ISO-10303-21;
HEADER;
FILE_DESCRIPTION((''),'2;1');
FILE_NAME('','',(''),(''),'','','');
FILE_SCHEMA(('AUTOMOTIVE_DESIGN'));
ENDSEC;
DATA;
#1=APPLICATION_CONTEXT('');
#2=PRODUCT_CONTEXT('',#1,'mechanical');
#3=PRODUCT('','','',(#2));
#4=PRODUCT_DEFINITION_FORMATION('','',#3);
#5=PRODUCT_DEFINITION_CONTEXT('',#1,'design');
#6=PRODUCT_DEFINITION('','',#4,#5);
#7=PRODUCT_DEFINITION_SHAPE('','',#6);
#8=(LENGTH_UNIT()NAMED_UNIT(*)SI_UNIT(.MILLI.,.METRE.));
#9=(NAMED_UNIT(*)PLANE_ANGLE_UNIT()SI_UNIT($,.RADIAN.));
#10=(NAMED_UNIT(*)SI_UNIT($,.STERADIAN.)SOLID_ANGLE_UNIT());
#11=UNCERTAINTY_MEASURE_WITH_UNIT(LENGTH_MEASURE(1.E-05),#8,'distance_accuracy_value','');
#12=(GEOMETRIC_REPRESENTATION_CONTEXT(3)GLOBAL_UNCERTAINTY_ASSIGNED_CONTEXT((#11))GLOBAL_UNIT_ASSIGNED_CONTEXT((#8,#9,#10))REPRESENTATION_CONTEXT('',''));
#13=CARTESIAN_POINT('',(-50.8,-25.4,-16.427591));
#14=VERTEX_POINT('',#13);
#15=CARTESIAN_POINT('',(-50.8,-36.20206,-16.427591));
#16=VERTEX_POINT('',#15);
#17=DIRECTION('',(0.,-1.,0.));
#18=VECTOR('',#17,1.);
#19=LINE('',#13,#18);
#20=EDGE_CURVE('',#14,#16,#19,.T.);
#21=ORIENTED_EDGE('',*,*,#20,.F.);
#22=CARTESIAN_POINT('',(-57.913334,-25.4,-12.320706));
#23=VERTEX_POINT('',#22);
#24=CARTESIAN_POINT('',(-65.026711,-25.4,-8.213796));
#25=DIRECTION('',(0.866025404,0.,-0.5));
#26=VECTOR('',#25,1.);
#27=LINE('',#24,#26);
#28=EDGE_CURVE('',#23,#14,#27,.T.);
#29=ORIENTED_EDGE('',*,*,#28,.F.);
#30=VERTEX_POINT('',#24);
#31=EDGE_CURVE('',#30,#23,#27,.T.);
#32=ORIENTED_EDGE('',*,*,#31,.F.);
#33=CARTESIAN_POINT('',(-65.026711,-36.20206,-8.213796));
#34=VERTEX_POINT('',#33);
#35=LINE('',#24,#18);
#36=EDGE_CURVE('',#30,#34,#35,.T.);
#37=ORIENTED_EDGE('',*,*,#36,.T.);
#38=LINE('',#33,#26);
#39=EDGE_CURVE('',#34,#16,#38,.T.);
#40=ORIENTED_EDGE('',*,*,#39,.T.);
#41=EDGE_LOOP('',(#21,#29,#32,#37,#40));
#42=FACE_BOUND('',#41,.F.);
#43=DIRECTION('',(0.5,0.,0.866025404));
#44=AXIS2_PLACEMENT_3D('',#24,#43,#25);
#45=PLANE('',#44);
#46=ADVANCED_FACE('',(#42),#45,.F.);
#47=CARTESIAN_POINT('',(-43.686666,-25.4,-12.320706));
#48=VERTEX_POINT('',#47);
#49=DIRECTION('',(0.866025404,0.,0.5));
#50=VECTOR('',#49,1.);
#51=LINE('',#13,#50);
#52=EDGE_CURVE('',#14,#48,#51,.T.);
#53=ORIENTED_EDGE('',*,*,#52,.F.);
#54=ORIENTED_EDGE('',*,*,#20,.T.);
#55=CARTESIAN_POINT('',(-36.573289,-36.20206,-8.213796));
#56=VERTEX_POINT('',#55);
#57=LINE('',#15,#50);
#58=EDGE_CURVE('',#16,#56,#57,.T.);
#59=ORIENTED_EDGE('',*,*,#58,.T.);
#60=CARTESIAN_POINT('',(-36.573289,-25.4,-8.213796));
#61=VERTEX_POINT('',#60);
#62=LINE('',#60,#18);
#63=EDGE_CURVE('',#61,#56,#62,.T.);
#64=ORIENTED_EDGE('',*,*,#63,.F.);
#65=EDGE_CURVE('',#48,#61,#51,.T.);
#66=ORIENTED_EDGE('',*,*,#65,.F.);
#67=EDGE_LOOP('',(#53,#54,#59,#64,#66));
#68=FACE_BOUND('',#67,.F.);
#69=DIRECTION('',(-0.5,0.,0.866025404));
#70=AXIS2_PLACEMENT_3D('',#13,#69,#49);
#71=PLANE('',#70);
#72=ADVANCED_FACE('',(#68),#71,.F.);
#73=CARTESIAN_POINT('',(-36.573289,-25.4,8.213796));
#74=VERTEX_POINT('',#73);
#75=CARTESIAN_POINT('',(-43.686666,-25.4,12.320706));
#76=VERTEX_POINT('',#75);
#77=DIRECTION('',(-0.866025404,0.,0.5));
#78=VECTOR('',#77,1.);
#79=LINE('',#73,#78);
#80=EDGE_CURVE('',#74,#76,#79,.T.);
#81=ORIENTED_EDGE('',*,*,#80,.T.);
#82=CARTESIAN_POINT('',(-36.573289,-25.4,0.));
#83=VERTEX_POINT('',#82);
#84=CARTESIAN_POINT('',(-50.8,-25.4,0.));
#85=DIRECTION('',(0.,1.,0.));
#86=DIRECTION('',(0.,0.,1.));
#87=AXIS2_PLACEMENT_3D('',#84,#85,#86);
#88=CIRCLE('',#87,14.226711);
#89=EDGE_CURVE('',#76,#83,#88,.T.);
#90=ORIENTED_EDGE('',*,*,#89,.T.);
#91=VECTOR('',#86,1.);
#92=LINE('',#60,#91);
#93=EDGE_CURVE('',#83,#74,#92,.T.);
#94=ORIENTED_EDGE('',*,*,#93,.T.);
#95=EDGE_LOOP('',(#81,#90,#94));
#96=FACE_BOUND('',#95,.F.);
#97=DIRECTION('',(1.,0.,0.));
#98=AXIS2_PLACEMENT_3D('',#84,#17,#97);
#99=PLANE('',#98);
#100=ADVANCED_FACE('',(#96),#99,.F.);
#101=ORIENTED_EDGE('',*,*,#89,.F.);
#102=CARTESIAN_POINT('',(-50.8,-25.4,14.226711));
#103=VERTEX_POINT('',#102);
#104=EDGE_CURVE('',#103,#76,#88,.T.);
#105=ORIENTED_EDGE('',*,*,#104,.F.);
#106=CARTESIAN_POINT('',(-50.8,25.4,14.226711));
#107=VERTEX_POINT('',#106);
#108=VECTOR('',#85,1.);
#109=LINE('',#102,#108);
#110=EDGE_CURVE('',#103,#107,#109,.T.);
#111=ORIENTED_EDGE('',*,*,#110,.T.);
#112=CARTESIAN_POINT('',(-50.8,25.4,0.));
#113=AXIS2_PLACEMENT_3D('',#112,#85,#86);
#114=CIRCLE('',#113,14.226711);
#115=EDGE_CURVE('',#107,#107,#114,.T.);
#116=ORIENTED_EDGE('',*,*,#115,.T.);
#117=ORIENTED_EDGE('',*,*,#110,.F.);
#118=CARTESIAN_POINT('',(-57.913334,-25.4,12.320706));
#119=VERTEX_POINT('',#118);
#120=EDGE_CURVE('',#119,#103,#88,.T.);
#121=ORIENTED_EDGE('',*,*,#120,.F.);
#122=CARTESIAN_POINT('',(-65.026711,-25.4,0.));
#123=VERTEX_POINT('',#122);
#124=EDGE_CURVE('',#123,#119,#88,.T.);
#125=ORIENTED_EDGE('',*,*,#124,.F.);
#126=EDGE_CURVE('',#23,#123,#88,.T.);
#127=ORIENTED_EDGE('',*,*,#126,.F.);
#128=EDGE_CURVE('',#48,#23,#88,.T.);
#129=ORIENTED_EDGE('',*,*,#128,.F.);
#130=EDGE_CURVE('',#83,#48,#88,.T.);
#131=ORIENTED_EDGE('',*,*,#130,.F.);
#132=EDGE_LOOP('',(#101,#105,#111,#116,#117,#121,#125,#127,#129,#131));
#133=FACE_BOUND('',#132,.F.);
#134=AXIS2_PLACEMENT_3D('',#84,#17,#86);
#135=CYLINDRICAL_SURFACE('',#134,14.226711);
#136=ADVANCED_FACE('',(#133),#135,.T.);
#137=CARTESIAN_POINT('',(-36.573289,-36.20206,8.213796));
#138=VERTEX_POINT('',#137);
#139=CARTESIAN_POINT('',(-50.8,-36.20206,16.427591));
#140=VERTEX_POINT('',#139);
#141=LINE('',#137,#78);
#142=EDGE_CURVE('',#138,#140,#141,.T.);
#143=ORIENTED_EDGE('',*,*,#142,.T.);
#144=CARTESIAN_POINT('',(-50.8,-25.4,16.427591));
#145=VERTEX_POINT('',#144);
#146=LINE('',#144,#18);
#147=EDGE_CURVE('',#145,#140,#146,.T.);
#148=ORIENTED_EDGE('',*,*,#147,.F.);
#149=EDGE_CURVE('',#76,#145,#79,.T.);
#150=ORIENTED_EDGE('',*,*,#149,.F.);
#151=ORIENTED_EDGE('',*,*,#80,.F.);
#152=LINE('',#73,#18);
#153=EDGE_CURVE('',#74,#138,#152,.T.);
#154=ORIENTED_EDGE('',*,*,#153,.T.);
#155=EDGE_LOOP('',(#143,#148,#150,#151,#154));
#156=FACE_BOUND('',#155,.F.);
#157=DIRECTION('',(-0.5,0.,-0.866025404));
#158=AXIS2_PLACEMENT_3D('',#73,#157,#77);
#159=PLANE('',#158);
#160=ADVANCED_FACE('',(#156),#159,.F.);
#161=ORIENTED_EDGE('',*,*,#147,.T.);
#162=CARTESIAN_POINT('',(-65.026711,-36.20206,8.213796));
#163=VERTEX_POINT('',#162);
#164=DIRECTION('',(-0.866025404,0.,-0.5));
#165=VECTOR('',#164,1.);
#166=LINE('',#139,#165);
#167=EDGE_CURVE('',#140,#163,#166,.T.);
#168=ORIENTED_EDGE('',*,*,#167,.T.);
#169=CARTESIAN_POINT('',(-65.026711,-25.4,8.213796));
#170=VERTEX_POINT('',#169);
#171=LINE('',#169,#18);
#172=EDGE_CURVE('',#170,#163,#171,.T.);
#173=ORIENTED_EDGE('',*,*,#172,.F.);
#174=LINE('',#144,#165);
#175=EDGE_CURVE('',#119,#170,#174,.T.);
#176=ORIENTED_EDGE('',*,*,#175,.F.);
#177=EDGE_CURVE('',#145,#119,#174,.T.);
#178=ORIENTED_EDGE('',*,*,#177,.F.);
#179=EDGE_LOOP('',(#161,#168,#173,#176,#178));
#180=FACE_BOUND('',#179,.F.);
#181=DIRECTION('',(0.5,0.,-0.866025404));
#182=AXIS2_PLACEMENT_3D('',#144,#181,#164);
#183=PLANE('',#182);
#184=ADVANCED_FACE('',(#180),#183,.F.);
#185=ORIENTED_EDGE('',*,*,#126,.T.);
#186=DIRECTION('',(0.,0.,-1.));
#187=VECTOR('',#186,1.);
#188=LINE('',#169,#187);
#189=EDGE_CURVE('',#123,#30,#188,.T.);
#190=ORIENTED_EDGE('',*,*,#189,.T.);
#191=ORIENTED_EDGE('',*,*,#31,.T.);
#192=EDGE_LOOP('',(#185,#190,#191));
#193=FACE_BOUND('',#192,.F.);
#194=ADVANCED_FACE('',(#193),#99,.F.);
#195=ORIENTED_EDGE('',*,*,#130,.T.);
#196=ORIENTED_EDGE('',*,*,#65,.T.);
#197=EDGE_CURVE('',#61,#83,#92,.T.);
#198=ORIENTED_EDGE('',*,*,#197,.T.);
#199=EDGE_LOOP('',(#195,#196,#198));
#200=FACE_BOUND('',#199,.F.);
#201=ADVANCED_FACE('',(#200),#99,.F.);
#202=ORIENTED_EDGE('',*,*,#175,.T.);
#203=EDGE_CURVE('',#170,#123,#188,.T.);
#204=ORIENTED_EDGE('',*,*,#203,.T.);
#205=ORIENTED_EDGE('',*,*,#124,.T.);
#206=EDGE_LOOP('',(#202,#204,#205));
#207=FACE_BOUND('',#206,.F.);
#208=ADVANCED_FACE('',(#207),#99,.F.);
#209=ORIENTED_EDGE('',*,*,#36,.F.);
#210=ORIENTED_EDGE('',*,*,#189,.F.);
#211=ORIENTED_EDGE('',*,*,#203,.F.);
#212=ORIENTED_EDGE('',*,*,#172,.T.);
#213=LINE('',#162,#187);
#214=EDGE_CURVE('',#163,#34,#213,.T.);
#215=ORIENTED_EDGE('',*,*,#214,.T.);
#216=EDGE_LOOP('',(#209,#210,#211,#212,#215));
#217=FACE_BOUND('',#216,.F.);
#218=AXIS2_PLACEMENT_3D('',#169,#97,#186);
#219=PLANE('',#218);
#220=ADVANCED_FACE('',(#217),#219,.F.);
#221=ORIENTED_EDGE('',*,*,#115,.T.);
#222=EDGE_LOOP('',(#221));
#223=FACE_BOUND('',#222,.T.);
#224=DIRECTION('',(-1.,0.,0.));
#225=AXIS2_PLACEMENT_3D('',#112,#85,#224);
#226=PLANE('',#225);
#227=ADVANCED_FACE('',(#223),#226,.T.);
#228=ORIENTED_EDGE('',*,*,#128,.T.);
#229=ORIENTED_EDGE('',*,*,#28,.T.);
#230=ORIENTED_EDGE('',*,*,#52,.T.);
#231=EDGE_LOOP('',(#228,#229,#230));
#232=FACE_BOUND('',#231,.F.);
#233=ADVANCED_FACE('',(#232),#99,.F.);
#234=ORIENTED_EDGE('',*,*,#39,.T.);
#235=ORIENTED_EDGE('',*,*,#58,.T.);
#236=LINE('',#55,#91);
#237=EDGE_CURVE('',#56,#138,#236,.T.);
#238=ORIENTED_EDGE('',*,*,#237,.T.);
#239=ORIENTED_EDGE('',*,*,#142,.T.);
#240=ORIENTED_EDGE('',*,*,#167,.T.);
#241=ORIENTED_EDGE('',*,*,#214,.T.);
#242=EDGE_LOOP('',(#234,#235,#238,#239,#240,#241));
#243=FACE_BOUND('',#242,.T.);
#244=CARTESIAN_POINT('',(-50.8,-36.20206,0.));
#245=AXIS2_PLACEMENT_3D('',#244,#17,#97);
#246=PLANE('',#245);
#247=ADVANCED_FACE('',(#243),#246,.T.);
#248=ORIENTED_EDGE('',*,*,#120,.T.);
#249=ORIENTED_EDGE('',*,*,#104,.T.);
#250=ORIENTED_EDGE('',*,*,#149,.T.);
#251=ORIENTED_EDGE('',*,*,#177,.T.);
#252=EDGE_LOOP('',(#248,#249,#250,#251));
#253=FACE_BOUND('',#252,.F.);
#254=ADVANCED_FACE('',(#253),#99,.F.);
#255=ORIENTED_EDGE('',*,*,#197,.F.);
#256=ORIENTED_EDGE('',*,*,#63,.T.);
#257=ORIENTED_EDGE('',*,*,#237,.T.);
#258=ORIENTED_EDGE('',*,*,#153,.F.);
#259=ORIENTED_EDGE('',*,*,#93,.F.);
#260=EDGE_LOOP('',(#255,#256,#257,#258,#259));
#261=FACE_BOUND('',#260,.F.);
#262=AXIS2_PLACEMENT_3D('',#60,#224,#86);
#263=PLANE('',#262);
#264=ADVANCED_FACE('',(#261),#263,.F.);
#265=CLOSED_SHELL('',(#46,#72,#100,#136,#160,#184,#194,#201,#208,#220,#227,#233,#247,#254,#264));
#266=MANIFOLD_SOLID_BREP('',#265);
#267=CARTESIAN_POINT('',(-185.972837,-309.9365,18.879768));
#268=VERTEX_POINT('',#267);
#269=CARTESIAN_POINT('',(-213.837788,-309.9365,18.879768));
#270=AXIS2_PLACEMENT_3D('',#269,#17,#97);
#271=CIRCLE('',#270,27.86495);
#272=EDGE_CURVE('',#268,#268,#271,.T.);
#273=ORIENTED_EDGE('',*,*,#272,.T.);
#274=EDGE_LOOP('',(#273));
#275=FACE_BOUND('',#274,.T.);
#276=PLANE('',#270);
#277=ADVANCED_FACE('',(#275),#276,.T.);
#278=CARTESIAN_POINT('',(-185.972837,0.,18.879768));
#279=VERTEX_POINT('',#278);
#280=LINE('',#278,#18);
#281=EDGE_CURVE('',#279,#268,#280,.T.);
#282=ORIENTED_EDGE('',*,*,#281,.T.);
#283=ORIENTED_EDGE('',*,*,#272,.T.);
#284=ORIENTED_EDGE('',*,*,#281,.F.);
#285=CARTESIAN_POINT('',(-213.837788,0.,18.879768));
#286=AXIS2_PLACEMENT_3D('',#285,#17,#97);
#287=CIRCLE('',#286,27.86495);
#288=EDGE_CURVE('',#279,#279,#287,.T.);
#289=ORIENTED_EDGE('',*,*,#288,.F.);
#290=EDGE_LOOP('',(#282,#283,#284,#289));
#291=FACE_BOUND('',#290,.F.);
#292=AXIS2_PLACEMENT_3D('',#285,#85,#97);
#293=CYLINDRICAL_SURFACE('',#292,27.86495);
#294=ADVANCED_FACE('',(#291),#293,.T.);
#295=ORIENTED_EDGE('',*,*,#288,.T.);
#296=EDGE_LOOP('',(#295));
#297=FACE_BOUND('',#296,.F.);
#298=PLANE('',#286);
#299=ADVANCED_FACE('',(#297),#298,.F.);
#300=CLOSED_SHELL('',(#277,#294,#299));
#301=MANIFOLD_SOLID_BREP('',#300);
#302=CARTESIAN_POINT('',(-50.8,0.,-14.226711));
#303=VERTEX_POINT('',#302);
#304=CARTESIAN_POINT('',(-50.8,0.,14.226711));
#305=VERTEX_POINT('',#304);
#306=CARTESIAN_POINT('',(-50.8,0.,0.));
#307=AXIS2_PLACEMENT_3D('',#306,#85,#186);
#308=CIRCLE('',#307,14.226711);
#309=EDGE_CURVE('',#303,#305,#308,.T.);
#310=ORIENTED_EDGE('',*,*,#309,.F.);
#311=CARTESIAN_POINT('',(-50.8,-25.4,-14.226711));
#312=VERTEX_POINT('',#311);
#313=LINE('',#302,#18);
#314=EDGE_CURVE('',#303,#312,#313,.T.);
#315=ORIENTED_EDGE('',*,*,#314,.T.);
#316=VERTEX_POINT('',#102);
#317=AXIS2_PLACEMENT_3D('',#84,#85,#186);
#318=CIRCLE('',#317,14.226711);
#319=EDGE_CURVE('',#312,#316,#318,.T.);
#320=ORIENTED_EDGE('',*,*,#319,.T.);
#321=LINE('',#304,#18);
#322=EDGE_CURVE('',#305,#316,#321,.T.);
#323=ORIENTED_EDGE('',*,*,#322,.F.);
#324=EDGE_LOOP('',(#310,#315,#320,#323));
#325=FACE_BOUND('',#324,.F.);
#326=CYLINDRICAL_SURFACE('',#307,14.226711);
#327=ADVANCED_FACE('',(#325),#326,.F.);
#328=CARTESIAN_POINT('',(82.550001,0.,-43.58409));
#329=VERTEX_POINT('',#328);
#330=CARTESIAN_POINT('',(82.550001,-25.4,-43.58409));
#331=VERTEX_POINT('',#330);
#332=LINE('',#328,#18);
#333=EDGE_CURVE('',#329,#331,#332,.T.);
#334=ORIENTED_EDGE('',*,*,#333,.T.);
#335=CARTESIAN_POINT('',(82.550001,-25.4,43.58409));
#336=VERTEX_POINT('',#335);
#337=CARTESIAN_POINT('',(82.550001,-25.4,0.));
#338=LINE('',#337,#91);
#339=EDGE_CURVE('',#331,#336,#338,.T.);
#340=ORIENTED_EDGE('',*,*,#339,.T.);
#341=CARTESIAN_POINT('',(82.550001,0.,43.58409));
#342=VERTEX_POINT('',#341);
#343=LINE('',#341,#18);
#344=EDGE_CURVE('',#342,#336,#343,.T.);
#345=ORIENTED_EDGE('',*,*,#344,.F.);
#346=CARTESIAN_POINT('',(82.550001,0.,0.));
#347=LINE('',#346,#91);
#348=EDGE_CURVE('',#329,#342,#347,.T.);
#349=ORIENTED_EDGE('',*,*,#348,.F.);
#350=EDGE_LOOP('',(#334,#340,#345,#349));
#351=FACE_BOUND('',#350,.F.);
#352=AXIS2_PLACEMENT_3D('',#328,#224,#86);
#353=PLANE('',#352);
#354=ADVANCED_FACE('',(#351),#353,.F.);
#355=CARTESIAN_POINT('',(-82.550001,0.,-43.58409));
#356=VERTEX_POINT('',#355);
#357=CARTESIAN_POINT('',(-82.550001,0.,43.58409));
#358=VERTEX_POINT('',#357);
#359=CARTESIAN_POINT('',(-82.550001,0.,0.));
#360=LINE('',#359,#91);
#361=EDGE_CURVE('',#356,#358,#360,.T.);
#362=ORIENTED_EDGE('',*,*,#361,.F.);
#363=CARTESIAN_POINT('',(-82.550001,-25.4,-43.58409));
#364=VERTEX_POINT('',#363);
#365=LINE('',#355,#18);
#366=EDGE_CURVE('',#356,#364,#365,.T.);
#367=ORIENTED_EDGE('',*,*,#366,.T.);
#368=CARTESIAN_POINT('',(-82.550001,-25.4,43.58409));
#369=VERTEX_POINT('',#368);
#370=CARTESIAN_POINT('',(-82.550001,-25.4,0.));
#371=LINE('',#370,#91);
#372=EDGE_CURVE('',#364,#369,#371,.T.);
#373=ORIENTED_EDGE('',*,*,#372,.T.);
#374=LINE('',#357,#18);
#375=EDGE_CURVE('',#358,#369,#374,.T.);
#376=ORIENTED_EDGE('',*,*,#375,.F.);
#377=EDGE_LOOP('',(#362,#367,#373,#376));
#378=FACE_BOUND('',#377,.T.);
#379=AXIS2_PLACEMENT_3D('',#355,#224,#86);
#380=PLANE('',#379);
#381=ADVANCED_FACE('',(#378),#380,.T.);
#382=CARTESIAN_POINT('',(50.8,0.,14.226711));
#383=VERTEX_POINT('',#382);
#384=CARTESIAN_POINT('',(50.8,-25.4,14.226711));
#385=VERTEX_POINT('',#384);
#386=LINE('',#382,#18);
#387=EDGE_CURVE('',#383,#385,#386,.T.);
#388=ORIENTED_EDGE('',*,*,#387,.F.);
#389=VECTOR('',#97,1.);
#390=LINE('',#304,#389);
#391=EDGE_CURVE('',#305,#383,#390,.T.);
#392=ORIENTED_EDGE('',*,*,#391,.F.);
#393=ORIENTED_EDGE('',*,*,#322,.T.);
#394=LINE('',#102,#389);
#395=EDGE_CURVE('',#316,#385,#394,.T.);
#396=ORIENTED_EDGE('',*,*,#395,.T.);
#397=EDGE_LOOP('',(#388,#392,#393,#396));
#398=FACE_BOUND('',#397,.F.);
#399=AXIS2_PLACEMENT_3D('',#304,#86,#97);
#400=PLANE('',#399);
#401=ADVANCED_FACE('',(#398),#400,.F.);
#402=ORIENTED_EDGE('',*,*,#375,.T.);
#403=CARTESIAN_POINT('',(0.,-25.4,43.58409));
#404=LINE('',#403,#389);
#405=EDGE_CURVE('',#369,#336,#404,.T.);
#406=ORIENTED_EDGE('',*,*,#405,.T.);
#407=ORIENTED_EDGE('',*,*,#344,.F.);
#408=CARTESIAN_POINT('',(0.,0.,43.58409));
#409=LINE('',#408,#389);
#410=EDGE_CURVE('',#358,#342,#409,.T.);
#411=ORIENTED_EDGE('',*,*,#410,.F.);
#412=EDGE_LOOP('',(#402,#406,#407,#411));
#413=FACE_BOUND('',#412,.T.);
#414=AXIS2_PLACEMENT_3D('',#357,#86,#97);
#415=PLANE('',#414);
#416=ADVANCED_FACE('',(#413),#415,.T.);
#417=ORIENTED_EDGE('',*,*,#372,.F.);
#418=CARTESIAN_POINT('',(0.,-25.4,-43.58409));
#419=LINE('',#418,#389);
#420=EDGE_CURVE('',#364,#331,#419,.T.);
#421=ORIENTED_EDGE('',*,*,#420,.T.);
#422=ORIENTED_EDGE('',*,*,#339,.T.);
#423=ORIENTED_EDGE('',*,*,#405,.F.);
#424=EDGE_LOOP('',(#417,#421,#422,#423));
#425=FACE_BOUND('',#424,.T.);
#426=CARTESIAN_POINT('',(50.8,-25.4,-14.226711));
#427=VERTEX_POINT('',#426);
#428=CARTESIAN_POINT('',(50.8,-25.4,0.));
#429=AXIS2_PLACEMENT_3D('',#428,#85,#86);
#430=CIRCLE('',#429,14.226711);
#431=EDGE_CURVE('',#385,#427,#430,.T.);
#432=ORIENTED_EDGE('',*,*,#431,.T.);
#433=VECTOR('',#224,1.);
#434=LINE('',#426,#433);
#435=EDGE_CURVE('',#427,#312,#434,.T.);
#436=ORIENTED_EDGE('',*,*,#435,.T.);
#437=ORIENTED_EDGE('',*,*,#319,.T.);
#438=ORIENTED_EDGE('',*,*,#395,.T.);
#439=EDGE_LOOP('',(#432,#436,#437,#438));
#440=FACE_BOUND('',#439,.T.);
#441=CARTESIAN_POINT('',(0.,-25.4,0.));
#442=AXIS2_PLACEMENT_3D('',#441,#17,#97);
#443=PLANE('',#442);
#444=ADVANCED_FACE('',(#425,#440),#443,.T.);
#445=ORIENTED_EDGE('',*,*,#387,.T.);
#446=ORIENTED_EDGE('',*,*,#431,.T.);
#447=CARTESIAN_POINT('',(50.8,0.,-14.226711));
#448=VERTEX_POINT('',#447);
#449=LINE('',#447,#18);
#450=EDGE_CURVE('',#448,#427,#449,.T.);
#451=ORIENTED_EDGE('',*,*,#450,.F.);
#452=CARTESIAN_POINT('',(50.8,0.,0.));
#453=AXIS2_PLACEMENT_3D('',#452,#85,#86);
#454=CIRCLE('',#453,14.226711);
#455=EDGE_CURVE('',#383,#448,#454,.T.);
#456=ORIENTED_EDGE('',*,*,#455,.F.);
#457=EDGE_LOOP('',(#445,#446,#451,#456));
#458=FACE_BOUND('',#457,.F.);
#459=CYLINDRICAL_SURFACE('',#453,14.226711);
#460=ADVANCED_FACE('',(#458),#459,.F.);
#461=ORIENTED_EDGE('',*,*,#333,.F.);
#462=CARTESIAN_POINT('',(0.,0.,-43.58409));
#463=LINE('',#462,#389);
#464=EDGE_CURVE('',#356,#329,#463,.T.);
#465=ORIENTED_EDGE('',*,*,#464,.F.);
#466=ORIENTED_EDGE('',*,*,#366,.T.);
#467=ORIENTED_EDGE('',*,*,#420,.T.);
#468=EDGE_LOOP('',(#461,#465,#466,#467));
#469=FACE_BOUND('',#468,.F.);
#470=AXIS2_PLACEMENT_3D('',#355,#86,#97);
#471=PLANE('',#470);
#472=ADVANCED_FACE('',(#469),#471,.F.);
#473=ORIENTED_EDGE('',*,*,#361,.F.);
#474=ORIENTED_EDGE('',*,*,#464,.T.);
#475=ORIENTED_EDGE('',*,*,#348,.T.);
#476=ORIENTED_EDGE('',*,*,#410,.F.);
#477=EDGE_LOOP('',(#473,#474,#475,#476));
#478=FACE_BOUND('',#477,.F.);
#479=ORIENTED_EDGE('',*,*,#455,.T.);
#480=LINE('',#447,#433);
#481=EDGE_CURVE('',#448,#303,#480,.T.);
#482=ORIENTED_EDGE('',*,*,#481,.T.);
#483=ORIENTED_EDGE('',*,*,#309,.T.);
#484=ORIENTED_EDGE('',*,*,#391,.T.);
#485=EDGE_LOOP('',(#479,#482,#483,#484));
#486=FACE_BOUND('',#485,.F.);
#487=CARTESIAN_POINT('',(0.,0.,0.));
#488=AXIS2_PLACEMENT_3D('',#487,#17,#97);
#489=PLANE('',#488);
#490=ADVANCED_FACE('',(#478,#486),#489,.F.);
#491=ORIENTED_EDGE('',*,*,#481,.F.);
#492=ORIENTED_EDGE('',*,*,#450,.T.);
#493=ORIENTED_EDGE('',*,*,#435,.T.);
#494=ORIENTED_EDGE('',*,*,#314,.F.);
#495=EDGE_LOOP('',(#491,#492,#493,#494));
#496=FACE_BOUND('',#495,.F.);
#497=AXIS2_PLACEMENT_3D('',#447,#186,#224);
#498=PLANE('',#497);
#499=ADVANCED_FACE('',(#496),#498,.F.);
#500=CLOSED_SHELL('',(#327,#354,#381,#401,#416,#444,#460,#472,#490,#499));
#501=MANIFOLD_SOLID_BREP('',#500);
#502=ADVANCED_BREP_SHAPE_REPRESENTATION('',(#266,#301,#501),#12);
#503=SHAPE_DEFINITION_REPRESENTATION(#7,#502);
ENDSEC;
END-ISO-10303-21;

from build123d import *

# Parameters (mm, degrees)
F0_W     = 165.1000029331
F0_H     = 87.1681807961
F1_DEPTH = 25.4
F3_DEPTH = 10.80206
F5_DEPTH = 50.8
F6_R     = 27.8649500895
F7_DEPTH = 309.9365


with BuildPart() as f1:
    # F0 (on Front) → F1 (new body)
    with BuildSketch(Plane.XZ):
        Rectangle(F0_W, F0_H)
        with BuildLine():
            ThreePointArc((-50.8, -14.2267111767), (-65.0267111767, 0), (-50.8, 14.2267111767))
            Line((-50.8, 14.2267111767), (50.8, 14.2267111767))
            ThreePointArc((50.8, 14.2267111767), (65.0267111767, 0), (50.8, -14.2267111767))
            Line((50.8, -14.2267111767), (-50.8, -14.2267111767))
        make_face(mode=Mode.SUBTRACT)
    extrude(amount=F1_DEPTH)


with BuildPart() as f3:
    # F2 (on face) → F3 (new body)
    with BuildSketch(Plane.XZ.offset(25.4)):
        Polygon((-65.0267111767, 8.2137955275), (-65.0267111767, -8.2137955275), (-50.8, -16.4275910551), (-36.5732888233, -8.2137955275), (-36.5732888233, 8.2137955275), (-50.8, 16.4275910551), align=None)
    extrude(amount=F3_DEPTH)

    # F4 (on face) → F5 (join)
    with BuildSketch(Plane(origin=(0, -25.4, 0), x_dir=(-1, 0, 0), z_dir=(0, 1, 0))):
        with BuildLine():
            ThreePointArc((50.8, -14.2267111767), (65.0267111767, 0), (50.8, 14.2267111767))
            ThreePointArc((50.8, 14.2267111767), (36.5732888233, 0), (50.8, -14.2267111767))
        make_face()
    extrude(amount=F5_DEPTH)


with BuildPart() as f7:
    # F6 (on Front) → F7 (new body)
    with BuildSketch(Plane.XZ):
        with Locations((-213.837787509, 18.8797675073)):
            Circle(F6_R)
    extrude(amount=F7_DEPTH)


solid = Compound([f1.part, f3.part, f7.part])
